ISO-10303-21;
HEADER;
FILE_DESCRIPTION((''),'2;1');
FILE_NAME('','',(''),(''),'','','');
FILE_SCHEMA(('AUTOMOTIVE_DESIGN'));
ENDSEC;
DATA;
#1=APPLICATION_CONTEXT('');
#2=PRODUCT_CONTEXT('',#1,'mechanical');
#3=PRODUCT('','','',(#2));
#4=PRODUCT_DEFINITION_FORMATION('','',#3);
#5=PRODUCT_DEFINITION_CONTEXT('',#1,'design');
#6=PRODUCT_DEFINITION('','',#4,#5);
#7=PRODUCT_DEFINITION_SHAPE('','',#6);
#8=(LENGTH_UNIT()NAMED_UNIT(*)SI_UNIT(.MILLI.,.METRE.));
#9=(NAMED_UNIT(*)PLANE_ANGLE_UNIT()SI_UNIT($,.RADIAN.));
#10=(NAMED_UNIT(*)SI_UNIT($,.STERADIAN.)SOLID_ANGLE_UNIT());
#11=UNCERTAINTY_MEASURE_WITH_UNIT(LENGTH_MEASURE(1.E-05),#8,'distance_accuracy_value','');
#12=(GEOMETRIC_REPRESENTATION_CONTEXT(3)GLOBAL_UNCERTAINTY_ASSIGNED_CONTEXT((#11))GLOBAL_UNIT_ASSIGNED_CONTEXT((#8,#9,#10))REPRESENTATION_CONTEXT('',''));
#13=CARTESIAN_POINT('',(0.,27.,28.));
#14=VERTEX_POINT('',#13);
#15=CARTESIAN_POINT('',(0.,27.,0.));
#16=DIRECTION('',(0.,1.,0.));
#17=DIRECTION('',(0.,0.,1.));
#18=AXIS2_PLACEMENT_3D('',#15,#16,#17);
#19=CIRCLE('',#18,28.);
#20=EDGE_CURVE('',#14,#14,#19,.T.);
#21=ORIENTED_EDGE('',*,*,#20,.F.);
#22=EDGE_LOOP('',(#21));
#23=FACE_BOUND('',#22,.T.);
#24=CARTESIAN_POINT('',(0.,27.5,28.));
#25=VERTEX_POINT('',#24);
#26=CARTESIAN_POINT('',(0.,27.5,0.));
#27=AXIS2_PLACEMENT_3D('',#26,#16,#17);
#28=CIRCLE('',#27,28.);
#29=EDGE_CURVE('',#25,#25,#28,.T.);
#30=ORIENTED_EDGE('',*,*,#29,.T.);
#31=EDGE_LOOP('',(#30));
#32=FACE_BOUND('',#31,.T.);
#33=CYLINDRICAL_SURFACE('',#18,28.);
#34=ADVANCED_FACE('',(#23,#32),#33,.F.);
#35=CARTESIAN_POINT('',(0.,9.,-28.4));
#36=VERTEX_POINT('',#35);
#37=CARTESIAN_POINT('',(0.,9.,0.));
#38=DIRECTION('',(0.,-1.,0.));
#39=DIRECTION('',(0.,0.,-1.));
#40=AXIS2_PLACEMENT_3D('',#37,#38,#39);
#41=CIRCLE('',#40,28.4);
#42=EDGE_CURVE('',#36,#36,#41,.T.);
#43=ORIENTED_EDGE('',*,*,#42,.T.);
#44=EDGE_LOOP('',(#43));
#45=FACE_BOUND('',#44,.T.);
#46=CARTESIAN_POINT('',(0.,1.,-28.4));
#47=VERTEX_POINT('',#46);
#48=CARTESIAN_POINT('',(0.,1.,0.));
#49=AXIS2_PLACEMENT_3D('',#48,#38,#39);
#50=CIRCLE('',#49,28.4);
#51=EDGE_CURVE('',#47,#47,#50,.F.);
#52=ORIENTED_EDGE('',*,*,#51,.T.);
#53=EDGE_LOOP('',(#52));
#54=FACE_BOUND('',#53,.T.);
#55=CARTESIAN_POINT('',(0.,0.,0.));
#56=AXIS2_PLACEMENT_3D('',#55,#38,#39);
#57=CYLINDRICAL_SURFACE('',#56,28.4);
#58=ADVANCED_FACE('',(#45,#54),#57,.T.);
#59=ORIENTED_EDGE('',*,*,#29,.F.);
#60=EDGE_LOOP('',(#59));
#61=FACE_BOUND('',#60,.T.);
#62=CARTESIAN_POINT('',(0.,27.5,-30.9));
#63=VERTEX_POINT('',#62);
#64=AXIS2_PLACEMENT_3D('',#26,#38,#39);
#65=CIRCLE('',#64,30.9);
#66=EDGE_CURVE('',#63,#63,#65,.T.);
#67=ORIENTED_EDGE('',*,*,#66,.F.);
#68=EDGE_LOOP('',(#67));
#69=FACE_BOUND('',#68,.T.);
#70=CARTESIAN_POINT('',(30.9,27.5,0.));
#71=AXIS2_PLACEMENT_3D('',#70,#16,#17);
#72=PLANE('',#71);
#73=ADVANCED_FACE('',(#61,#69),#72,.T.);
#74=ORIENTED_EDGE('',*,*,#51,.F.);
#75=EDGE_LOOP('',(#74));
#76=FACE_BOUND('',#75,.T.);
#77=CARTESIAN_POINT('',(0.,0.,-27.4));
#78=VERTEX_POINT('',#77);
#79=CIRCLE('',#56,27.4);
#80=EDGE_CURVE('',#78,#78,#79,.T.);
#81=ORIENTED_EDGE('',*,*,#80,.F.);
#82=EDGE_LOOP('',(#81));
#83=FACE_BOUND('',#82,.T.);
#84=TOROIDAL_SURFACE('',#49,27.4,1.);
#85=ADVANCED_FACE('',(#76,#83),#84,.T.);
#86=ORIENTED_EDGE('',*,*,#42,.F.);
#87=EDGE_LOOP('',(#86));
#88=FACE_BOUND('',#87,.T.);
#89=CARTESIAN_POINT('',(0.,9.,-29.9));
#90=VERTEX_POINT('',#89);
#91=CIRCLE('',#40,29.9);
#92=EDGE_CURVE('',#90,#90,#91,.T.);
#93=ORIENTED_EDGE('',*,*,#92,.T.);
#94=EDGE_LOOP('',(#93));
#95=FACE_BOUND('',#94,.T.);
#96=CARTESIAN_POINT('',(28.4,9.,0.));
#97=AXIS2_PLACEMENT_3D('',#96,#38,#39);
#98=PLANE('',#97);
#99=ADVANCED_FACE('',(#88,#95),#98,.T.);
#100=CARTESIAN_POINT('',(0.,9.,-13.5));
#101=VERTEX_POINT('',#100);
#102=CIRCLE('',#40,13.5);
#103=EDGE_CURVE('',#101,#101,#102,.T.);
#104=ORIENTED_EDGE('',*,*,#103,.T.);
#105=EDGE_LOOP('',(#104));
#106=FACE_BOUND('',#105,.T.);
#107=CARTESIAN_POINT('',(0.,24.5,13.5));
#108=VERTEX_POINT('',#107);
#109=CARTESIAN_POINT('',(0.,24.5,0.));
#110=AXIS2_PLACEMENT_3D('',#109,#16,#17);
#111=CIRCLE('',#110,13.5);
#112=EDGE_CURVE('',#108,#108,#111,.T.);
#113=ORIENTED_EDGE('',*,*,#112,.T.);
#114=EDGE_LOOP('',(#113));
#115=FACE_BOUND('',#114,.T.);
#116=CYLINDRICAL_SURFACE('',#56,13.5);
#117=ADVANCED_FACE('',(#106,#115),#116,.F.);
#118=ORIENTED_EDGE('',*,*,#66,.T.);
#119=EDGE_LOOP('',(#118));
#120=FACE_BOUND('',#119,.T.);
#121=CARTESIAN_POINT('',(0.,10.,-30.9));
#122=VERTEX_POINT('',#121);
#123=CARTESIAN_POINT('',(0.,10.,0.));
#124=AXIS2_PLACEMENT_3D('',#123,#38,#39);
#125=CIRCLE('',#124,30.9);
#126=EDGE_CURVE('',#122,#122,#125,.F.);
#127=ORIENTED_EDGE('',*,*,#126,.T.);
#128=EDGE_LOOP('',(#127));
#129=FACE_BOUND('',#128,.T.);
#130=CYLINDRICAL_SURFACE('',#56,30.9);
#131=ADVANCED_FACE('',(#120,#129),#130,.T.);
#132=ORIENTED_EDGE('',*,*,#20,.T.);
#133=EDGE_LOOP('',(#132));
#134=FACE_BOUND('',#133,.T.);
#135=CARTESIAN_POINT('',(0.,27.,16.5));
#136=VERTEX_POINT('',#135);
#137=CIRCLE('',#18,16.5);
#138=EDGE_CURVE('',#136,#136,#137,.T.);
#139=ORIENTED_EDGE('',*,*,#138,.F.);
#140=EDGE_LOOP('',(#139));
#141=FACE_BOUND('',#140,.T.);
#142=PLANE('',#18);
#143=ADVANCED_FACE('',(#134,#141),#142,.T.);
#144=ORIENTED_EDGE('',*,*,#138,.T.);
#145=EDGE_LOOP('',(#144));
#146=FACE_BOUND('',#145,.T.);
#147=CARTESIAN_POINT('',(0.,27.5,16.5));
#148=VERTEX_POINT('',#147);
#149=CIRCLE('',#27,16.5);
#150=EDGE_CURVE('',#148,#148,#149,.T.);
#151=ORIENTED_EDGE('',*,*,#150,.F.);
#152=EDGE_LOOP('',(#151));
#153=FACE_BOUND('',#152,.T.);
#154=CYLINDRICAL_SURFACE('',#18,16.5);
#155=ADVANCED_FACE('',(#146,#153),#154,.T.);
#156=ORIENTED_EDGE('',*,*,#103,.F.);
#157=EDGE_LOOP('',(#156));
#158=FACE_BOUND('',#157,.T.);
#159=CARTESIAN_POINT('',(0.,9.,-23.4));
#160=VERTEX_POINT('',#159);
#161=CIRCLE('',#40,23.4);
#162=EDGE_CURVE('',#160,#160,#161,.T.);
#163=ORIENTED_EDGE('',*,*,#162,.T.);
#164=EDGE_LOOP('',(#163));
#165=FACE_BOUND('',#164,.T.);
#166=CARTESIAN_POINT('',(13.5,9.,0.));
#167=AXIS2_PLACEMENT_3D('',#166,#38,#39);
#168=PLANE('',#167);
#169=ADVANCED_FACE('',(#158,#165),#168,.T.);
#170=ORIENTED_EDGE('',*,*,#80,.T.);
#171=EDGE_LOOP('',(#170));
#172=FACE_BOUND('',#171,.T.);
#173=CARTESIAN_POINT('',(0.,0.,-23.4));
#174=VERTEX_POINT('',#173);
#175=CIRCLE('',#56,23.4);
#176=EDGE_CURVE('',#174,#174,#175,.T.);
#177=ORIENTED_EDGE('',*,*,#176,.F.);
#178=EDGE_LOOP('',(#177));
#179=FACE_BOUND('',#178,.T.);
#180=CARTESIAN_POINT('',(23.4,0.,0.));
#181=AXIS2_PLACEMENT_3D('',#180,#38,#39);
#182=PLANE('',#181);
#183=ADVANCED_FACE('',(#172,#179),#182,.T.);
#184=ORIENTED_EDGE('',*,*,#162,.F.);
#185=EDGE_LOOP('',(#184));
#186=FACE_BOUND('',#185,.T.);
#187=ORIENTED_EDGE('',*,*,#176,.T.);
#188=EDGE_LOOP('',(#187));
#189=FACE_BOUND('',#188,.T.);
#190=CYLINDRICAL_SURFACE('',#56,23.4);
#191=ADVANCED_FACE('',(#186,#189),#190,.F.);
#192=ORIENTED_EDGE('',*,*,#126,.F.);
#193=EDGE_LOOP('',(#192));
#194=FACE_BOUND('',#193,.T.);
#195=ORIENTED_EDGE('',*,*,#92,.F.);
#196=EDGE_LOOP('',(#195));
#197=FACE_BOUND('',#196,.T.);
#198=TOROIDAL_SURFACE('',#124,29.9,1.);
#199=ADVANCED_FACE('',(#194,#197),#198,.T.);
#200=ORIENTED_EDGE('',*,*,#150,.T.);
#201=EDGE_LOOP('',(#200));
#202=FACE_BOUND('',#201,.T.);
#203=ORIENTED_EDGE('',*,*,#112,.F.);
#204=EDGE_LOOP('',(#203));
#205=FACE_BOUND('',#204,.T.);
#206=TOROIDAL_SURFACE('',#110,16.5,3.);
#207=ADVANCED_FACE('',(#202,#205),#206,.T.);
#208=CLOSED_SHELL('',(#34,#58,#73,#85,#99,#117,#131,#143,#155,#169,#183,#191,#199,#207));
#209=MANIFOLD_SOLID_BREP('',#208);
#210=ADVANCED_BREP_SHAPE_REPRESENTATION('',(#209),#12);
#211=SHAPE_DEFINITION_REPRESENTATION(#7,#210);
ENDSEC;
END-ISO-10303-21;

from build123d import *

# Parameters (mm, degrees)
FILLET_1_R          = 1
SKETCH_4_R          = 28
SKETCH_4_R_2        = 16.5
CUT_EXTRUDE_1_DEPTH = 0.5
FILLET_2_R          = 3


with BuildPart() as part:
    # Эскиз3 → Повернуть2 (revolve)
    with BuildSketch(Plane.XY, mode=Mode.PRIVATE) as revolve_2_sk:
        Polygon((23.4, 0), (28.4, 0), (28.4, 9), (30.9, 9), (30.9, 27.5), (13.5, 27.5), (13.5, 9), (23.4, 9), align=None)
    revolve(revolve_2_sk.sketch.rotate(Axis((0, 0, 0), (0, 1, 0)), 90), axis=Axis((0, 0, 0), (0, 1, 0)))

    # Скругление1
    fillet_1_edges = [part.edges().sort_by_distance(p)[0] for p in [
        (0, 9, 30.9),
        (0, 0, 28.4),
    ]]
    fillet(fillet_1_edges, radius=FILLET_1_R)

    # Эскиз4 → Вырез-Вытянуть1 (cut)
    with BuildSketch(Plane(origin=(0, 27.5, 0), x_dir=(1, 0, 0), z_dir=(0, 1, 0))):
        with Locations(Location((0, 0, 0), (0, 0, 270))):
            Circle(SKETCH_4_R)
        with Locations(Location((0, 0, 0), (0, 0, 270))):
            Circle(SKETCH_4_R_2, mode=Mode.SUBTRACT)
    extrude(amount=-CUT_EXTRUDE_1_DEPTH, mode=Mode.SUBTRACT)

    # Скругление2
    fillet_2_edges = [part.edges().sort_by_distance(p)[0] for p in [
        (0, 27.5, 13.5),
    ]]
    fillet(fillet_2_edges, radius=FILLET_2_R - 0.0001)  # a hair under: the kernel refuses the full size


solid = part.part
